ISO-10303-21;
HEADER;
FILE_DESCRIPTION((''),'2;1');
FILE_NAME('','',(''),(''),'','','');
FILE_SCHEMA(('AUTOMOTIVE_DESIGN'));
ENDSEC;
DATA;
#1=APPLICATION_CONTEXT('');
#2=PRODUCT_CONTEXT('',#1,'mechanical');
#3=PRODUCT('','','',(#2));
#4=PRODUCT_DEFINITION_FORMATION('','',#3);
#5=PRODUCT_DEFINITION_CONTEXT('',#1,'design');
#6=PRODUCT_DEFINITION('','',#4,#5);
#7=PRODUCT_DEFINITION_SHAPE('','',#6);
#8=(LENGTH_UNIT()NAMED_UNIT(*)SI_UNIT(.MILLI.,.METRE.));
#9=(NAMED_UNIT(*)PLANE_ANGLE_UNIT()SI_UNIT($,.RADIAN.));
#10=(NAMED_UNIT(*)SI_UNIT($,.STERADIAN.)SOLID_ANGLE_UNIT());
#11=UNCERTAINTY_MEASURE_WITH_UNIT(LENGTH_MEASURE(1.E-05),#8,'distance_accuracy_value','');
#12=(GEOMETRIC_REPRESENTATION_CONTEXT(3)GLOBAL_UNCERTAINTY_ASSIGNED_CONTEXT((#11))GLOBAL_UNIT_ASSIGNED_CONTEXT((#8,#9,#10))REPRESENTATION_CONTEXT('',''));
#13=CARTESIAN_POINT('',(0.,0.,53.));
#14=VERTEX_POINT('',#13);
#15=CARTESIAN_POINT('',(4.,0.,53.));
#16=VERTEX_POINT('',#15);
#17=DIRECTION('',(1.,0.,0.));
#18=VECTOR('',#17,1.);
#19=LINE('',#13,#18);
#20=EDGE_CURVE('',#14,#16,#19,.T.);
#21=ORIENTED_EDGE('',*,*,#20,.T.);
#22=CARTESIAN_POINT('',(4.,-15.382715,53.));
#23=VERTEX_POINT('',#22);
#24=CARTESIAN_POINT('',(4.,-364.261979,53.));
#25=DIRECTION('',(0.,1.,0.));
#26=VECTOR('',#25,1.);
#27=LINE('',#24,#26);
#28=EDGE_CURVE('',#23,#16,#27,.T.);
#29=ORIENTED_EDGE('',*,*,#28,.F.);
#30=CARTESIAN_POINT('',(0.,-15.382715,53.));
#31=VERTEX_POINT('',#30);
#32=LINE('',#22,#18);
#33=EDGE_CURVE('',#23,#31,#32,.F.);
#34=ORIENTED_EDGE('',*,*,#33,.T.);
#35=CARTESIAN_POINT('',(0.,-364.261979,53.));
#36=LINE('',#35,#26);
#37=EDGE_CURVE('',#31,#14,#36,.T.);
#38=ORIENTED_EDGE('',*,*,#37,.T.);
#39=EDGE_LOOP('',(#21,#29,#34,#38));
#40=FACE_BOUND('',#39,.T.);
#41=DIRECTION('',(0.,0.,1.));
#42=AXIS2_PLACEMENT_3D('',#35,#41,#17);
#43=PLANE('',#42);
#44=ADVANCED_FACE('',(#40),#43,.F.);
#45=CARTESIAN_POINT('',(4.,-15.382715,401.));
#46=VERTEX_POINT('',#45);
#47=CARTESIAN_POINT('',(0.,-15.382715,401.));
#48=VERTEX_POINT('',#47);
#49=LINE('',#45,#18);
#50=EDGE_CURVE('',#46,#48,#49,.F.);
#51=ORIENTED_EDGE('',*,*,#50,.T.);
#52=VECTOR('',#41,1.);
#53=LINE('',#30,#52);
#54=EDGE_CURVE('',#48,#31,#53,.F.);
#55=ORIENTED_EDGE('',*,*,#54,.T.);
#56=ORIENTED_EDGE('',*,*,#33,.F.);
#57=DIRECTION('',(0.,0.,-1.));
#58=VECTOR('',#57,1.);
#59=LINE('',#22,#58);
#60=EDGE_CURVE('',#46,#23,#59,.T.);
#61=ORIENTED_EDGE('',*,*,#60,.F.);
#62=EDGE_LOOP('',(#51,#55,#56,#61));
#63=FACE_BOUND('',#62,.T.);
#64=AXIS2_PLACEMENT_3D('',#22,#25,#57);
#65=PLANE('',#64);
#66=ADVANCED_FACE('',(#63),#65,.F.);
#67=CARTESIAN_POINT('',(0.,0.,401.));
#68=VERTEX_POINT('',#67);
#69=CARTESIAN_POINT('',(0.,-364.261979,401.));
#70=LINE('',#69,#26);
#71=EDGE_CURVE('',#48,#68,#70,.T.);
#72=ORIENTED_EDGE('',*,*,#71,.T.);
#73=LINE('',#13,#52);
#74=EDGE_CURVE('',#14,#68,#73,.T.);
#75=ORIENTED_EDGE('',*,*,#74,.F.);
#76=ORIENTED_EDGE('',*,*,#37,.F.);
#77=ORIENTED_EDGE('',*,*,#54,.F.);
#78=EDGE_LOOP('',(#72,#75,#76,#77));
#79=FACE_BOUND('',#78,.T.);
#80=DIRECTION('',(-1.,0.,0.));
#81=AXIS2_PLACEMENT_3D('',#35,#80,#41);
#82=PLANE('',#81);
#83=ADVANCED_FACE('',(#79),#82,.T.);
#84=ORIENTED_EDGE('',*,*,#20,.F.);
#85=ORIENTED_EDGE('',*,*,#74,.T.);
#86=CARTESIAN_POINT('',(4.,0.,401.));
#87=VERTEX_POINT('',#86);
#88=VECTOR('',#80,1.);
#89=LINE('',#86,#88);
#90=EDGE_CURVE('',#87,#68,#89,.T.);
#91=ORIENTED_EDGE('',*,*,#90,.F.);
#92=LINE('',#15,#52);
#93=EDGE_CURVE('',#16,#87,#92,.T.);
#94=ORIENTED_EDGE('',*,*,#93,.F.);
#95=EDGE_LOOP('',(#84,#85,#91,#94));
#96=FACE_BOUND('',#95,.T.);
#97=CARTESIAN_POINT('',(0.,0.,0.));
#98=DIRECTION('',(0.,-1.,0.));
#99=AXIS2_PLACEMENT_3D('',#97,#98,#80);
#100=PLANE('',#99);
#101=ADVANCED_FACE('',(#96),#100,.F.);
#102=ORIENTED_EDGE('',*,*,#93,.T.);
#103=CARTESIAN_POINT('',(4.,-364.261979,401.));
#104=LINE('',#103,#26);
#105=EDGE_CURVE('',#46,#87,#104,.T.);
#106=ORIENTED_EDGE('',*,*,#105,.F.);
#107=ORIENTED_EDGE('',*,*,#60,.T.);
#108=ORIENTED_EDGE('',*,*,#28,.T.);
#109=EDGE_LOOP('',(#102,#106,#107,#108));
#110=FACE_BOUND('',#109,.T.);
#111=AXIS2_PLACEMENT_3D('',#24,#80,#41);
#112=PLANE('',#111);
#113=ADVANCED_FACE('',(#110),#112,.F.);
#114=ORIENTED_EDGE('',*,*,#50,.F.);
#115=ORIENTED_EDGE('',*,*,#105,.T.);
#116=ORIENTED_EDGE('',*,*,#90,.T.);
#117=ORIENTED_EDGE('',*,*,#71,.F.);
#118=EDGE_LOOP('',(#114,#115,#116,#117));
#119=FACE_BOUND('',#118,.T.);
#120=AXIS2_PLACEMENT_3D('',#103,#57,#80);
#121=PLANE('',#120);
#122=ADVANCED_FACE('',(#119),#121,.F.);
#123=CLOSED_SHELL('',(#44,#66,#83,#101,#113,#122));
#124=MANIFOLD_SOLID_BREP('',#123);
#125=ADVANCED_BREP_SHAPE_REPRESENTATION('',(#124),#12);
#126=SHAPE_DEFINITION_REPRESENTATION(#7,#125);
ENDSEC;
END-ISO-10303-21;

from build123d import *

# Parameters (mm, degrees)
SKETCH_1_W             = 4
SKETCH_1_H             = 348
SM_BASE_FLANGE_1_DEPTH = 15.382715


# Sheet-metal steps are written as plain solids
with BuildPart() as part:
    # Sketch 1 → Базовая кромка1 (new body)
    with BuildSketch(Plane(origin=(0, 0, 0), x_dir=(1, 0, 0), z_dir=(0, 1, 0))):
        with Locations((2, -227)):
            Rectangle(SKETCH_1_W, SKETCH_1_H)
    extrude(amount=-SM_BASE_FLANGE_1_DEPTH)


solid = part.part
